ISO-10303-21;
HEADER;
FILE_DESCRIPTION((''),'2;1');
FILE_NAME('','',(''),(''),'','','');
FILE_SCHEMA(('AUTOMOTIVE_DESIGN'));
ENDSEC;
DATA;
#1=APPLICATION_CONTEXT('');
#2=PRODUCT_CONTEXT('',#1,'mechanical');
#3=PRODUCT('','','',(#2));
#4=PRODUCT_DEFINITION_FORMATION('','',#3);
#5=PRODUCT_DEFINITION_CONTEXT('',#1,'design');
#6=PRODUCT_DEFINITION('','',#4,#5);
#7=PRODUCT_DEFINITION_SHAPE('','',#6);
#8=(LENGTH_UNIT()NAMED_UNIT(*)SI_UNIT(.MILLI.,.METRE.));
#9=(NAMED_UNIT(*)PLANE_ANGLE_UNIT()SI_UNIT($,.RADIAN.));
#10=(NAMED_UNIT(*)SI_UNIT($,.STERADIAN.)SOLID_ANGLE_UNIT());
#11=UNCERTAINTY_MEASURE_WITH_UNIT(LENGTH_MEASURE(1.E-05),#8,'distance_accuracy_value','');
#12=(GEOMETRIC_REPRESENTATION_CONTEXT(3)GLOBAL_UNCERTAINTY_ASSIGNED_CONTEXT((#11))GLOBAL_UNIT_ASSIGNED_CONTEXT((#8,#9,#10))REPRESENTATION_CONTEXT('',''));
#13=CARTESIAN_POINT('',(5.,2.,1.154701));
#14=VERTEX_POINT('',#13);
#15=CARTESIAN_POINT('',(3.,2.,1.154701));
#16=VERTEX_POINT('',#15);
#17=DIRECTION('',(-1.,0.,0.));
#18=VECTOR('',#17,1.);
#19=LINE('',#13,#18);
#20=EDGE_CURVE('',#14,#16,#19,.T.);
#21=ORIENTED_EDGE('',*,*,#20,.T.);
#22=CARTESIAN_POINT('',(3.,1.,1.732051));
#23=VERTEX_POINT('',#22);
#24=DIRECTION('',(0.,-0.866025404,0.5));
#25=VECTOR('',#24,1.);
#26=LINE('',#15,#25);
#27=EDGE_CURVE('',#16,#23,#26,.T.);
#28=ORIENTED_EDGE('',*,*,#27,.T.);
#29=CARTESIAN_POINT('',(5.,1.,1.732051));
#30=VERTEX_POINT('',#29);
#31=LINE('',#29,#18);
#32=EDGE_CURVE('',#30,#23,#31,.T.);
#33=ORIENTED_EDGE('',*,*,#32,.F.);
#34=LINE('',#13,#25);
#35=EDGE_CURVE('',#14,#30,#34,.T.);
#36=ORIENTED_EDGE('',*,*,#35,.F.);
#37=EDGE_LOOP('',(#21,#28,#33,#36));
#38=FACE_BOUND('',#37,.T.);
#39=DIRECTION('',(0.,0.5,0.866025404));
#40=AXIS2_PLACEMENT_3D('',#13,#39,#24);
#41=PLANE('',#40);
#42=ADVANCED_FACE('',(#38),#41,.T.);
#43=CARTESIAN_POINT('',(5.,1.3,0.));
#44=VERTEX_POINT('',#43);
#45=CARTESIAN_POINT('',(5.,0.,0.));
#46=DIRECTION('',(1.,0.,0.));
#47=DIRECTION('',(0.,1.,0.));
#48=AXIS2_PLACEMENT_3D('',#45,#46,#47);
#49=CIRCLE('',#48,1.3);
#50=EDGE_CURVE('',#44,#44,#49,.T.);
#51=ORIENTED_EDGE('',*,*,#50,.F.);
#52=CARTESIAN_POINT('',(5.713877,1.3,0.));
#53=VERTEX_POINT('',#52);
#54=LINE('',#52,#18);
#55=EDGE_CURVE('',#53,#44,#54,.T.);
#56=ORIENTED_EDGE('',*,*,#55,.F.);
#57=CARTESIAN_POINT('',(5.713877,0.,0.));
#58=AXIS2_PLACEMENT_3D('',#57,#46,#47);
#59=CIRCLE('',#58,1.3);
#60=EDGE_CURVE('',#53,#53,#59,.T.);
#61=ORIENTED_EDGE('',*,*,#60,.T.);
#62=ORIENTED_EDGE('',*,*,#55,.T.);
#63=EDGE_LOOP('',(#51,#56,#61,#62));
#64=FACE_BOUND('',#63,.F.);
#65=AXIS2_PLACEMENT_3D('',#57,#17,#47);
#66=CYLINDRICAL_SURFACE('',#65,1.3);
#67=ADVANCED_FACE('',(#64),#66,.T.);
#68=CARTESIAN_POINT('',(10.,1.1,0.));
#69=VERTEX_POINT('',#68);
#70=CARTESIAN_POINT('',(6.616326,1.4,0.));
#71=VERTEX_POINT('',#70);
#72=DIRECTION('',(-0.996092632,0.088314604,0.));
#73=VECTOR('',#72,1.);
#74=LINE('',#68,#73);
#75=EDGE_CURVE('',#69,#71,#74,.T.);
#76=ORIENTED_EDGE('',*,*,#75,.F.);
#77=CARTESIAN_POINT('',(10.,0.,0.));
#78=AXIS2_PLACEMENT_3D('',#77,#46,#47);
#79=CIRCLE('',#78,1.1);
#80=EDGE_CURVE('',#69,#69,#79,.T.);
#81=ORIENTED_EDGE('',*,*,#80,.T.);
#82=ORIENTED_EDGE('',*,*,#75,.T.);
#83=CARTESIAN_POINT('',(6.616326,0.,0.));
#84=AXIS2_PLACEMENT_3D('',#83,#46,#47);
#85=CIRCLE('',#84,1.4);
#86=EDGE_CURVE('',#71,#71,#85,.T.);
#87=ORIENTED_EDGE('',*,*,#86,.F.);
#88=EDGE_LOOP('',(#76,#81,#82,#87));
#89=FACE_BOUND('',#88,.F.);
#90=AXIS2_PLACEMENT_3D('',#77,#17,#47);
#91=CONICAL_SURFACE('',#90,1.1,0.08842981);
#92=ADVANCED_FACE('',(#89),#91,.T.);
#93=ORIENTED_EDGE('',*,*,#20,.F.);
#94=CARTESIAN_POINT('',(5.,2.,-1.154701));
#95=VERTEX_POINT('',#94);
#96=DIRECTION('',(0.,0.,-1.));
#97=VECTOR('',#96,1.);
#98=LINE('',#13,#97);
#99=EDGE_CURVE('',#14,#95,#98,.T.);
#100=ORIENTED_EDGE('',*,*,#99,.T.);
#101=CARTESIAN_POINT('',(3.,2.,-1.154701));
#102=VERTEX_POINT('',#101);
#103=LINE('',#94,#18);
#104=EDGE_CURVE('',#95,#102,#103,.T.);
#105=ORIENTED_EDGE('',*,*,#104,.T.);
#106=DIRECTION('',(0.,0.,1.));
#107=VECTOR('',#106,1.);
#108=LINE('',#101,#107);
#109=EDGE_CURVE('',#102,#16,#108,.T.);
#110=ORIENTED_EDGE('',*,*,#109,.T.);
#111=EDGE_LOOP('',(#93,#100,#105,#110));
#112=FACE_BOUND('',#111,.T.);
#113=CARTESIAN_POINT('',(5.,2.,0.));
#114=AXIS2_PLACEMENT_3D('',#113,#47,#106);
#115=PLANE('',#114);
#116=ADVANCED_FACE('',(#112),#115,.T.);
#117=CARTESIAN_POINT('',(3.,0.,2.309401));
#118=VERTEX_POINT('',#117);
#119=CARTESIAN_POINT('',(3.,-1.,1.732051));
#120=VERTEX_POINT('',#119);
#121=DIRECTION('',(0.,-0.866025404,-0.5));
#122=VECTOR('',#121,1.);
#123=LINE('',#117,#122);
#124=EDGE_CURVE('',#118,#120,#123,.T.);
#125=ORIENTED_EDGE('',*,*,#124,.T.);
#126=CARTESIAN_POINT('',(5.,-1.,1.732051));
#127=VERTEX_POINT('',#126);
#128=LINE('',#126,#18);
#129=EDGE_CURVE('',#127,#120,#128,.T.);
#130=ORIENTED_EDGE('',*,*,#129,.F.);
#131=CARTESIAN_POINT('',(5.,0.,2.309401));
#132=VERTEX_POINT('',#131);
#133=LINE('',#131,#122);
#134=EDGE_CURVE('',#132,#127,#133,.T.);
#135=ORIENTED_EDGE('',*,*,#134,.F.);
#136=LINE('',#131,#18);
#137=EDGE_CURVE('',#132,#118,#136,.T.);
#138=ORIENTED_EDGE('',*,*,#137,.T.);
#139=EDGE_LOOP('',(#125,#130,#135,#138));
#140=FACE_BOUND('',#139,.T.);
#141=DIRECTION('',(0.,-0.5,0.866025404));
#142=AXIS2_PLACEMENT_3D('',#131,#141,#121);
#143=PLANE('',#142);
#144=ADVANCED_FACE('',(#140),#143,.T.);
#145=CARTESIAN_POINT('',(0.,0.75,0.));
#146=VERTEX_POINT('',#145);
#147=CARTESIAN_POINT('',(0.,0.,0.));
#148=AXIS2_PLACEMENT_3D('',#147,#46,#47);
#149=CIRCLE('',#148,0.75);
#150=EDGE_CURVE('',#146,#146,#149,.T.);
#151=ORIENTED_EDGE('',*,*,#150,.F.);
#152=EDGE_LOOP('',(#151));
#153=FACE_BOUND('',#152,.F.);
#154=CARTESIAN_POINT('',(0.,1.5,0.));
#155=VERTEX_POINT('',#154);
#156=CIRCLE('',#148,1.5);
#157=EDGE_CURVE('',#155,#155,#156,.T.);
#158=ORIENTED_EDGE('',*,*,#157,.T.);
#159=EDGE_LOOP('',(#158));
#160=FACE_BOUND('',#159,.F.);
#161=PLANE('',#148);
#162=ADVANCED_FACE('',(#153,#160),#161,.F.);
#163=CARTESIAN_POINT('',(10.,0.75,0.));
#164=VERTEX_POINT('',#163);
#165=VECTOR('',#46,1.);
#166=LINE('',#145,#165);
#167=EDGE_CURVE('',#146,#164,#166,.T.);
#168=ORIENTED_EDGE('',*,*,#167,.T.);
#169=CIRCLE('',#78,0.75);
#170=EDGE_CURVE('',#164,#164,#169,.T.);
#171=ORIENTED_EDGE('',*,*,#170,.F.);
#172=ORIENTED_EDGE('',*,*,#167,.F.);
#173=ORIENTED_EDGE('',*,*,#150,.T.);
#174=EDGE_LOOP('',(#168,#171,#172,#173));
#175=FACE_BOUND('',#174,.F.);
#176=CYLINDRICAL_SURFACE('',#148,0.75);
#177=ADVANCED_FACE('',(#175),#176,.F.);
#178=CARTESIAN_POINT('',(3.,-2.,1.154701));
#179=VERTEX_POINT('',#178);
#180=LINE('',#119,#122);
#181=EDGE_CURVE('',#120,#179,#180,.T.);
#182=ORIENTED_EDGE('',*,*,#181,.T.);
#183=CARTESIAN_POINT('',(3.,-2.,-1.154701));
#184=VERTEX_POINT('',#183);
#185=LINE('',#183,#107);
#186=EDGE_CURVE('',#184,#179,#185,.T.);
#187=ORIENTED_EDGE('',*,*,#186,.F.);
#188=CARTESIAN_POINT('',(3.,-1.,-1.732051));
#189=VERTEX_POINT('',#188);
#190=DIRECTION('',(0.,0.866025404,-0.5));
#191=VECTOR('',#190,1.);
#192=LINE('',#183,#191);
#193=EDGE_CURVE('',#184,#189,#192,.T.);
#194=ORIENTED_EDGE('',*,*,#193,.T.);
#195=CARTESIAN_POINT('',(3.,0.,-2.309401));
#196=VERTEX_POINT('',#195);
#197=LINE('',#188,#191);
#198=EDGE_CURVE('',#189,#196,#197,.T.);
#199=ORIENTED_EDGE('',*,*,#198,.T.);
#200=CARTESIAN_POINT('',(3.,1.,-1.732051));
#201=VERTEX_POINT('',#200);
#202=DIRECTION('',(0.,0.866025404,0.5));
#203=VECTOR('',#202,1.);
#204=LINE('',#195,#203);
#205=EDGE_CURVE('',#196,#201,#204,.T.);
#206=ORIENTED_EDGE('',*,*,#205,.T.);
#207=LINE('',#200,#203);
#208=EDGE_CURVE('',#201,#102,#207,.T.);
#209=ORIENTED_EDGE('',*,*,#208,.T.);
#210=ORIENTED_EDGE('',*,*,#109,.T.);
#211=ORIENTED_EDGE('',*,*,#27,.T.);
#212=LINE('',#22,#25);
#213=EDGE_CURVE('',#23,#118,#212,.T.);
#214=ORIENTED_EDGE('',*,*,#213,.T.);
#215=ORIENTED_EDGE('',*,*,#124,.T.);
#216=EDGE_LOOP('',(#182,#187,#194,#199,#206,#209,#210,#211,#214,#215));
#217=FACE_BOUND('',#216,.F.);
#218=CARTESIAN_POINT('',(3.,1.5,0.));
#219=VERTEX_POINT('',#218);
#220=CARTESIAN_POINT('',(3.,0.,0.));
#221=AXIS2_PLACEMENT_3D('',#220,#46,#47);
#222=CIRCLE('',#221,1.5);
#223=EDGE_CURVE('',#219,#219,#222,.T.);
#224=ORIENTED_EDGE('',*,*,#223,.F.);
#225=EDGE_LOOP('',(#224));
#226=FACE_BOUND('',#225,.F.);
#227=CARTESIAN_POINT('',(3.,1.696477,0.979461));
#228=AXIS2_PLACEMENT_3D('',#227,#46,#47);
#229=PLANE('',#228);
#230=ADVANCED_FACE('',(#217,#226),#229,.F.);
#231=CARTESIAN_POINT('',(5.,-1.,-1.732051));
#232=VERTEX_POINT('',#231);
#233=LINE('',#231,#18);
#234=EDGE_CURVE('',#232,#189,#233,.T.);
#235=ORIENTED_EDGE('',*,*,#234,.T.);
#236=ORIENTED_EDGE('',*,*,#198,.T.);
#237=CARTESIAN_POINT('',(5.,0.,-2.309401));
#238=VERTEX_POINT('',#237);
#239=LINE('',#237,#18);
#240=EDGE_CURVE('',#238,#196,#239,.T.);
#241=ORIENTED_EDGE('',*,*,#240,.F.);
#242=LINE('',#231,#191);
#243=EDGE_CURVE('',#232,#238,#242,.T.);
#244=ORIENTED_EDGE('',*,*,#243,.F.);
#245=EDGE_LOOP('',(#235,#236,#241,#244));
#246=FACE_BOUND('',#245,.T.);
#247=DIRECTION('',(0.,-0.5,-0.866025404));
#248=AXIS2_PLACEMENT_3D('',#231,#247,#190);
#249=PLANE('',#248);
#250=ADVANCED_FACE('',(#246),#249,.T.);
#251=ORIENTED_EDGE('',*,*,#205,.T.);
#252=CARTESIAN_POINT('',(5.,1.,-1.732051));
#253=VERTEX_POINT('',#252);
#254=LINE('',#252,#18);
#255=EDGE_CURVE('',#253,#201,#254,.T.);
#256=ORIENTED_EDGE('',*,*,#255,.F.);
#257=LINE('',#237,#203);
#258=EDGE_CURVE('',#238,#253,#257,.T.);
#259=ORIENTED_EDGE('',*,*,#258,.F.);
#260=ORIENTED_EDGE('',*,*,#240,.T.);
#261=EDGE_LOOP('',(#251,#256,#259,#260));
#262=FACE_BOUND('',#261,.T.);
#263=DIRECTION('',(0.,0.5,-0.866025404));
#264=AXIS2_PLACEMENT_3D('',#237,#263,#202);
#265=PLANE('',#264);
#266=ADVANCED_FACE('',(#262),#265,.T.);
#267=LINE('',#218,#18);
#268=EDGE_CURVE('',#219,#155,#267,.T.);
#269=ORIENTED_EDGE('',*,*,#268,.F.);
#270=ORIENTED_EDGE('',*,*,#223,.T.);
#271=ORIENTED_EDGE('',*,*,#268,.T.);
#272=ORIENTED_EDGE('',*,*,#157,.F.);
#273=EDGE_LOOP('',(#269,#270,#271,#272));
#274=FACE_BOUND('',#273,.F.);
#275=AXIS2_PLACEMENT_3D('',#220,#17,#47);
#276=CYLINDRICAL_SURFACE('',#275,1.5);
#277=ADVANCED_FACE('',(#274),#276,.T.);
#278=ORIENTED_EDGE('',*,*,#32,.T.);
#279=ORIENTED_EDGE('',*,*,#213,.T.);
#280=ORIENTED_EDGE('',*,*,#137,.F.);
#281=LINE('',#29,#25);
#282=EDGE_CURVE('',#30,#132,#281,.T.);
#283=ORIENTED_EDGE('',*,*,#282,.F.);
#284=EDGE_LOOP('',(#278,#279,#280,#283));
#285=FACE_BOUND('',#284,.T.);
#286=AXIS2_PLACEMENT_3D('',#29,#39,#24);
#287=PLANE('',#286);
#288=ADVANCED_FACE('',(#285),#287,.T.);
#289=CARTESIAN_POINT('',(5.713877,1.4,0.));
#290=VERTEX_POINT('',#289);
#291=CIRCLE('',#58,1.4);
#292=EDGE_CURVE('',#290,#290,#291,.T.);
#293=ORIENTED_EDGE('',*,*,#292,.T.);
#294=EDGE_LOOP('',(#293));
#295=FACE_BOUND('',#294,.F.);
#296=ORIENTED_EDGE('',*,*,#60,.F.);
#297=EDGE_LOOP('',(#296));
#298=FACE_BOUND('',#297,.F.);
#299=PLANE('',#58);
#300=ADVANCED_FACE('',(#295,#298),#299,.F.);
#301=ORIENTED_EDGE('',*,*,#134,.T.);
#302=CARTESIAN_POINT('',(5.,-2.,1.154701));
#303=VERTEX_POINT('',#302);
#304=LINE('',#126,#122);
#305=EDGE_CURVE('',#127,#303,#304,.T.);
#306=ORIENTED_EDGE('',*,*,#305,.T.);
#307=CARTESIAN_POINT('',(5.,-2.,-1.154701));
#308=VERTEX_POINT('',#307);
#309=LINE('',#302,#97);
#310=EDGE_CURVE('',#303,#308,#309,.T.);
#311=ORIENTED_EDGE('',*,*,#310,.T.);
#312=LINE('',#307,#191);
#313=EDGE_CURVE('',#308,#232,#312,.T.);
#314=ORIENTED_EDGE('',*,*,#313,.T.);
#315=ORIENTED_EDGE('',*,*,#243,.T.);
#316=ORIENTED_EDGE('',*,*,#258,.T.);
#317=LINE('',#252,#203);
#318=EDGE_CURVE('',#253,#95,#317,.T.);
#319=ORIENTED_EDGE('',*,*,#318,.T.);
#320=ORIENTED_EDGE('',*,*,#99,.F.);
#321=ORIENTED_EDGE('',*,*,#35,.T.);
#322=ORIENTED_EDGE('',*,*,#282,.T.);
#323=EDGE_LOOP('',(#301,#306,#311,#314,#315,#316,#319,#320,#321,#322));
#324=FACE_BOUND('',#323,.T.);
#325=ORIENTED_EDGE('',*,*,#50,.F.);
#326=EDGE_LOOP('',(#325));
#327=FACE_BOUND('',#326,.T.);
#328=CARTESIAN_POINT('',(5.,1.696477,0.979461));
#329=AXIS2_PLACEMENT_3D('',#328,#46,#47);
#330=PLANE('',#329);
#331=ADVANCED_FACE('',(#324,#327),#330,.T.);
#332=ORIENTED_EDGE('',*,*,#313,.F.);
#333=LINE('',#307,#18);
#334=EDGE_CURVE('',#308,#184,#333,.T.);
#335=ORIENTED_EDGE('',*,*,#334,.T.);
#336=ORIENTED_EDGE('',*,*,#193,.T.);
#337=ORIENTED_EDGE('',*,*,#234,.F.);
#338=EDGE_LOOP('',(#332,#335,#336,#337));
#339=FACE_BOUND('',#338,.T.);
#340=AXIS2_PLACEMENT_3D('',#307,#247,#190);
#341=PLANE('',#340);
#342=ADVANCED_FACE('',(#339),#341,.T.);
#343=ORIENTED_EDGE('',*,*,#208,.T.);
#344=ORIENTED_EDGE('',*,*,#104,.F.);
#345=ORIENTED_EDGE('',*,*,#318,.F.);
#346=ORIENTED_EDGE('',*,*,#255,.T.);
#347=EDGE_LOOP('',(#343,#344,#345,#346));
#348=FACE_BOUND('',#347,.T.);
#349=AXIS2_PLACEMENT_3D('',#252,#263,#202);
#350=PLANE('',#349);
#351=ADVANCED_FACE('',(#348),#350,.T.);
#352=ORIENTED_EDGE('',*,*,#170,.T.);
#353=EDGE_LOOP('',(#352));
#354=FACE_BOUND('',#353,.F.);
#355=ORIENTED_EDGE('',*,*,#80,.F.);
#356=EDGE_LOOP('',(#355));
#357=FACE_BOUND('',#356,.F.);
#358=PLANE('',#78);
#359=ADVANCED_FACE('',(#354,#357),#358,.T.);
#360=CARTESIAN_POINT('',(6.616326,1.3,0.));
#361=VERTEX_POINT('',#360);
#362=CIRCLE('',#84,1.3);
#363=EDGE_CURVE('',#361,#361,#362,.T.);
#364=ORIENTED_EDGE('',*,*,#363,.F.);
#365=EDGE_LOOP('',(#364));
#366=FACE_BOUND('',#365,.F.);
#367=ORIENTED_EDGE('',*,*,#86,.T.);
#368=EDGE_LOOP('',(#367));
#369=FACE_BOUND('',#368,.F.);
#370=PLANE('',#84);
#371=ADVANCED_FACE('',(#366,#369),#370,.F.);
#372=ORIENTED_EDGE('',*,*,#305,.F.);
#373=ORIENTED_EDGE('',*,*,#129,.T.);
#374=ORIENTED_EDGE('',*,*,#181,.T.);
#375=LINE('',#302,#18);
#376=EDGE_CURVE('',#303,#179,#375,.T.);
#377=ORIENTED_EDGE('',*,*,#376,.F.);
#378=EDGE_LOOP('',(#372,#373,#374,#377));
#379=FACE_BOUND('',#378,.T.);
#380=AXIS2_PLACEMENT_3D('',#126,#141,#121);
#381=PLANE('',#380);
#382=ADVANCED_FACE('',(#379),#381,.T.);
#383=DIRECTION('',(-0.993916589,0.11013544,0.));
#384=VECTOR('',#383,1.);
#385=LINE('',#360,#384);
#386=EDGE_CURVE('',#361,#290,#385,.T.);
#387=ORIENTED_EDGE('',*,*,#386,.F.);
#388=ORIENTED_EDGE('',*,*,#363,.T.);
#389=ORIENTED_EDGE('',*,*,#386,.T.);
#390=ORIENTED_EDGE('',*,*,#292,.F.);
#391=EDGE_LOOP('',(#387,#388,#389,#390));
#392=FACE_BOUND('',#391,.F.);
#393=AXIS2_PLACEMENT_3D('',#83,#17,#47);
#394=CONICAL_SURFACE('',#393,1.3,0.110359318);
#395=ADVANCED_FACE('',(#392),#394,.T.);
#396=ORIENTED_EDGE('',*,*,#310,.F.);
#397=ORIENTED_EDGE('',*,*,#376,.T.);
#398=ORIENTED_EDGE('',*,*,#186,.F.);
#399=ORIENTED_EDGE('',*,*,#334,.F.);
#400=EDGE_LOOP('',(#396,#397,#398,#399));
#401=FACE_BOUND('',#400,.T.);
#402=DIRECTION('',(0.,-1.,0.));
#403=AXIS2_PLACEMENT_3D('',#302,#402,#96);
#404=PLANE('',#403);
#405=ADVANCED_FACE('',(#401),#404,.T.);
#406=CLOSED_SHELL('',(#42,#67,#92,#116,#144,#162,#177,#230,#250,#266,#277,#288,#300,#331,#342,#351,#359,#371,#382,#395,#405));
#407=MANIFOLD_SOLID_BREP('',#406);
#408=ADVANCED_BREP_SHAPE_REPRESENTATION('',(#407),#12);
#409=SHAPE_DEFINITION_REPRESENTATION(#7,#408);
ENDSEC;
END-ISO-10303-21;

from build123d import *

# Parameters (mm, degrees)
F3_DEPTH = 2


with BuildPart() as f1:
    # F0 (on Top) → F1 (revolve)
    with BuildSketch(Plane.XY):
        Polygon((0, 1.5), (0, 0.75), (10, 0.75), (10, 1.1), (6.6163264594, 1.4), (6.6163264594, 1.3), (5.7138770835, 1.4), (5.7138770835, 1.3), (5, 1.3), (5, 2), (3, 2), (3, 1.5), align=None)
    revolve(axis=Axis((7.7490479817, 0, 0), (1, 0, 0)))

    # F2 (on face) → F3 (join)
    with BuildSketch(Plane.YZ.offset(5)):
        with BuildLine():
            Line((2, 0), (2, 1.1547005384))
            Line((2, 1.1547005384), (1.0000000433, 1.7320507826))
            ThreePointArc((1.0000000433, 1.7320507826), (1.7320508201, 0.9999999783), (2, 0))
        make_face()
        with BuildLine():
            Line((2, -1.1547005384), (2, 0))
            ThreePointArc((2, 0), (1.7320508201, -0.9999999783), (1.0000000433, -1.7320507826))
            Line((1.0000000433, -1.7320507826), (2, -1.1547005384))
        make_face()
        with BuildLine():
            ThreePointArc((-1.0000000602, 1.7320507728), (-9.7e-09, 2), (1.0000000433, 1.7320507826))
            Line((1.0000000433, 1.7320507826), (0, 2.3094010768))
            Line((0, 2.3094010768), (-1.0000000602, 1.7320507728))
        make_face()
        with BuildLine():
            Line((0, -2.3094010768), (1.0000000433, -1.7320507826))
            ThreePointArc((1.0000000433, -1.7320507826), (0, -2), (-1.0000000433, -1.7320507826))
            Line((-1.0000000433, -1.7320507826), (0, -2.3094010768))
        make_face()
        with BuildLine():
            ThreePointArc((-2, 0), (-1.7320508249, 0.9999999699), (-1.0000000602, 1.7320507728))
            Line((-1.0000000602, 1.7320507728), (-2, 1.1547005384))
            Line((-2, 1.1547005384), (-2, 0))
        make_face()
        with BuildLine():
            Line((-2, -1.1547005384), (-1.0000000433, -1.7320507826))
            ThreePointArc((-1.0000000433, -1.7320507826), (-1.7320508201, -0.9999999783), (-2, 0))
            Line((-2, 0), (-2, -1.1547005384))
        make_face()
    extrude(amount=-F3_DEPTH)


solid = f1.part
